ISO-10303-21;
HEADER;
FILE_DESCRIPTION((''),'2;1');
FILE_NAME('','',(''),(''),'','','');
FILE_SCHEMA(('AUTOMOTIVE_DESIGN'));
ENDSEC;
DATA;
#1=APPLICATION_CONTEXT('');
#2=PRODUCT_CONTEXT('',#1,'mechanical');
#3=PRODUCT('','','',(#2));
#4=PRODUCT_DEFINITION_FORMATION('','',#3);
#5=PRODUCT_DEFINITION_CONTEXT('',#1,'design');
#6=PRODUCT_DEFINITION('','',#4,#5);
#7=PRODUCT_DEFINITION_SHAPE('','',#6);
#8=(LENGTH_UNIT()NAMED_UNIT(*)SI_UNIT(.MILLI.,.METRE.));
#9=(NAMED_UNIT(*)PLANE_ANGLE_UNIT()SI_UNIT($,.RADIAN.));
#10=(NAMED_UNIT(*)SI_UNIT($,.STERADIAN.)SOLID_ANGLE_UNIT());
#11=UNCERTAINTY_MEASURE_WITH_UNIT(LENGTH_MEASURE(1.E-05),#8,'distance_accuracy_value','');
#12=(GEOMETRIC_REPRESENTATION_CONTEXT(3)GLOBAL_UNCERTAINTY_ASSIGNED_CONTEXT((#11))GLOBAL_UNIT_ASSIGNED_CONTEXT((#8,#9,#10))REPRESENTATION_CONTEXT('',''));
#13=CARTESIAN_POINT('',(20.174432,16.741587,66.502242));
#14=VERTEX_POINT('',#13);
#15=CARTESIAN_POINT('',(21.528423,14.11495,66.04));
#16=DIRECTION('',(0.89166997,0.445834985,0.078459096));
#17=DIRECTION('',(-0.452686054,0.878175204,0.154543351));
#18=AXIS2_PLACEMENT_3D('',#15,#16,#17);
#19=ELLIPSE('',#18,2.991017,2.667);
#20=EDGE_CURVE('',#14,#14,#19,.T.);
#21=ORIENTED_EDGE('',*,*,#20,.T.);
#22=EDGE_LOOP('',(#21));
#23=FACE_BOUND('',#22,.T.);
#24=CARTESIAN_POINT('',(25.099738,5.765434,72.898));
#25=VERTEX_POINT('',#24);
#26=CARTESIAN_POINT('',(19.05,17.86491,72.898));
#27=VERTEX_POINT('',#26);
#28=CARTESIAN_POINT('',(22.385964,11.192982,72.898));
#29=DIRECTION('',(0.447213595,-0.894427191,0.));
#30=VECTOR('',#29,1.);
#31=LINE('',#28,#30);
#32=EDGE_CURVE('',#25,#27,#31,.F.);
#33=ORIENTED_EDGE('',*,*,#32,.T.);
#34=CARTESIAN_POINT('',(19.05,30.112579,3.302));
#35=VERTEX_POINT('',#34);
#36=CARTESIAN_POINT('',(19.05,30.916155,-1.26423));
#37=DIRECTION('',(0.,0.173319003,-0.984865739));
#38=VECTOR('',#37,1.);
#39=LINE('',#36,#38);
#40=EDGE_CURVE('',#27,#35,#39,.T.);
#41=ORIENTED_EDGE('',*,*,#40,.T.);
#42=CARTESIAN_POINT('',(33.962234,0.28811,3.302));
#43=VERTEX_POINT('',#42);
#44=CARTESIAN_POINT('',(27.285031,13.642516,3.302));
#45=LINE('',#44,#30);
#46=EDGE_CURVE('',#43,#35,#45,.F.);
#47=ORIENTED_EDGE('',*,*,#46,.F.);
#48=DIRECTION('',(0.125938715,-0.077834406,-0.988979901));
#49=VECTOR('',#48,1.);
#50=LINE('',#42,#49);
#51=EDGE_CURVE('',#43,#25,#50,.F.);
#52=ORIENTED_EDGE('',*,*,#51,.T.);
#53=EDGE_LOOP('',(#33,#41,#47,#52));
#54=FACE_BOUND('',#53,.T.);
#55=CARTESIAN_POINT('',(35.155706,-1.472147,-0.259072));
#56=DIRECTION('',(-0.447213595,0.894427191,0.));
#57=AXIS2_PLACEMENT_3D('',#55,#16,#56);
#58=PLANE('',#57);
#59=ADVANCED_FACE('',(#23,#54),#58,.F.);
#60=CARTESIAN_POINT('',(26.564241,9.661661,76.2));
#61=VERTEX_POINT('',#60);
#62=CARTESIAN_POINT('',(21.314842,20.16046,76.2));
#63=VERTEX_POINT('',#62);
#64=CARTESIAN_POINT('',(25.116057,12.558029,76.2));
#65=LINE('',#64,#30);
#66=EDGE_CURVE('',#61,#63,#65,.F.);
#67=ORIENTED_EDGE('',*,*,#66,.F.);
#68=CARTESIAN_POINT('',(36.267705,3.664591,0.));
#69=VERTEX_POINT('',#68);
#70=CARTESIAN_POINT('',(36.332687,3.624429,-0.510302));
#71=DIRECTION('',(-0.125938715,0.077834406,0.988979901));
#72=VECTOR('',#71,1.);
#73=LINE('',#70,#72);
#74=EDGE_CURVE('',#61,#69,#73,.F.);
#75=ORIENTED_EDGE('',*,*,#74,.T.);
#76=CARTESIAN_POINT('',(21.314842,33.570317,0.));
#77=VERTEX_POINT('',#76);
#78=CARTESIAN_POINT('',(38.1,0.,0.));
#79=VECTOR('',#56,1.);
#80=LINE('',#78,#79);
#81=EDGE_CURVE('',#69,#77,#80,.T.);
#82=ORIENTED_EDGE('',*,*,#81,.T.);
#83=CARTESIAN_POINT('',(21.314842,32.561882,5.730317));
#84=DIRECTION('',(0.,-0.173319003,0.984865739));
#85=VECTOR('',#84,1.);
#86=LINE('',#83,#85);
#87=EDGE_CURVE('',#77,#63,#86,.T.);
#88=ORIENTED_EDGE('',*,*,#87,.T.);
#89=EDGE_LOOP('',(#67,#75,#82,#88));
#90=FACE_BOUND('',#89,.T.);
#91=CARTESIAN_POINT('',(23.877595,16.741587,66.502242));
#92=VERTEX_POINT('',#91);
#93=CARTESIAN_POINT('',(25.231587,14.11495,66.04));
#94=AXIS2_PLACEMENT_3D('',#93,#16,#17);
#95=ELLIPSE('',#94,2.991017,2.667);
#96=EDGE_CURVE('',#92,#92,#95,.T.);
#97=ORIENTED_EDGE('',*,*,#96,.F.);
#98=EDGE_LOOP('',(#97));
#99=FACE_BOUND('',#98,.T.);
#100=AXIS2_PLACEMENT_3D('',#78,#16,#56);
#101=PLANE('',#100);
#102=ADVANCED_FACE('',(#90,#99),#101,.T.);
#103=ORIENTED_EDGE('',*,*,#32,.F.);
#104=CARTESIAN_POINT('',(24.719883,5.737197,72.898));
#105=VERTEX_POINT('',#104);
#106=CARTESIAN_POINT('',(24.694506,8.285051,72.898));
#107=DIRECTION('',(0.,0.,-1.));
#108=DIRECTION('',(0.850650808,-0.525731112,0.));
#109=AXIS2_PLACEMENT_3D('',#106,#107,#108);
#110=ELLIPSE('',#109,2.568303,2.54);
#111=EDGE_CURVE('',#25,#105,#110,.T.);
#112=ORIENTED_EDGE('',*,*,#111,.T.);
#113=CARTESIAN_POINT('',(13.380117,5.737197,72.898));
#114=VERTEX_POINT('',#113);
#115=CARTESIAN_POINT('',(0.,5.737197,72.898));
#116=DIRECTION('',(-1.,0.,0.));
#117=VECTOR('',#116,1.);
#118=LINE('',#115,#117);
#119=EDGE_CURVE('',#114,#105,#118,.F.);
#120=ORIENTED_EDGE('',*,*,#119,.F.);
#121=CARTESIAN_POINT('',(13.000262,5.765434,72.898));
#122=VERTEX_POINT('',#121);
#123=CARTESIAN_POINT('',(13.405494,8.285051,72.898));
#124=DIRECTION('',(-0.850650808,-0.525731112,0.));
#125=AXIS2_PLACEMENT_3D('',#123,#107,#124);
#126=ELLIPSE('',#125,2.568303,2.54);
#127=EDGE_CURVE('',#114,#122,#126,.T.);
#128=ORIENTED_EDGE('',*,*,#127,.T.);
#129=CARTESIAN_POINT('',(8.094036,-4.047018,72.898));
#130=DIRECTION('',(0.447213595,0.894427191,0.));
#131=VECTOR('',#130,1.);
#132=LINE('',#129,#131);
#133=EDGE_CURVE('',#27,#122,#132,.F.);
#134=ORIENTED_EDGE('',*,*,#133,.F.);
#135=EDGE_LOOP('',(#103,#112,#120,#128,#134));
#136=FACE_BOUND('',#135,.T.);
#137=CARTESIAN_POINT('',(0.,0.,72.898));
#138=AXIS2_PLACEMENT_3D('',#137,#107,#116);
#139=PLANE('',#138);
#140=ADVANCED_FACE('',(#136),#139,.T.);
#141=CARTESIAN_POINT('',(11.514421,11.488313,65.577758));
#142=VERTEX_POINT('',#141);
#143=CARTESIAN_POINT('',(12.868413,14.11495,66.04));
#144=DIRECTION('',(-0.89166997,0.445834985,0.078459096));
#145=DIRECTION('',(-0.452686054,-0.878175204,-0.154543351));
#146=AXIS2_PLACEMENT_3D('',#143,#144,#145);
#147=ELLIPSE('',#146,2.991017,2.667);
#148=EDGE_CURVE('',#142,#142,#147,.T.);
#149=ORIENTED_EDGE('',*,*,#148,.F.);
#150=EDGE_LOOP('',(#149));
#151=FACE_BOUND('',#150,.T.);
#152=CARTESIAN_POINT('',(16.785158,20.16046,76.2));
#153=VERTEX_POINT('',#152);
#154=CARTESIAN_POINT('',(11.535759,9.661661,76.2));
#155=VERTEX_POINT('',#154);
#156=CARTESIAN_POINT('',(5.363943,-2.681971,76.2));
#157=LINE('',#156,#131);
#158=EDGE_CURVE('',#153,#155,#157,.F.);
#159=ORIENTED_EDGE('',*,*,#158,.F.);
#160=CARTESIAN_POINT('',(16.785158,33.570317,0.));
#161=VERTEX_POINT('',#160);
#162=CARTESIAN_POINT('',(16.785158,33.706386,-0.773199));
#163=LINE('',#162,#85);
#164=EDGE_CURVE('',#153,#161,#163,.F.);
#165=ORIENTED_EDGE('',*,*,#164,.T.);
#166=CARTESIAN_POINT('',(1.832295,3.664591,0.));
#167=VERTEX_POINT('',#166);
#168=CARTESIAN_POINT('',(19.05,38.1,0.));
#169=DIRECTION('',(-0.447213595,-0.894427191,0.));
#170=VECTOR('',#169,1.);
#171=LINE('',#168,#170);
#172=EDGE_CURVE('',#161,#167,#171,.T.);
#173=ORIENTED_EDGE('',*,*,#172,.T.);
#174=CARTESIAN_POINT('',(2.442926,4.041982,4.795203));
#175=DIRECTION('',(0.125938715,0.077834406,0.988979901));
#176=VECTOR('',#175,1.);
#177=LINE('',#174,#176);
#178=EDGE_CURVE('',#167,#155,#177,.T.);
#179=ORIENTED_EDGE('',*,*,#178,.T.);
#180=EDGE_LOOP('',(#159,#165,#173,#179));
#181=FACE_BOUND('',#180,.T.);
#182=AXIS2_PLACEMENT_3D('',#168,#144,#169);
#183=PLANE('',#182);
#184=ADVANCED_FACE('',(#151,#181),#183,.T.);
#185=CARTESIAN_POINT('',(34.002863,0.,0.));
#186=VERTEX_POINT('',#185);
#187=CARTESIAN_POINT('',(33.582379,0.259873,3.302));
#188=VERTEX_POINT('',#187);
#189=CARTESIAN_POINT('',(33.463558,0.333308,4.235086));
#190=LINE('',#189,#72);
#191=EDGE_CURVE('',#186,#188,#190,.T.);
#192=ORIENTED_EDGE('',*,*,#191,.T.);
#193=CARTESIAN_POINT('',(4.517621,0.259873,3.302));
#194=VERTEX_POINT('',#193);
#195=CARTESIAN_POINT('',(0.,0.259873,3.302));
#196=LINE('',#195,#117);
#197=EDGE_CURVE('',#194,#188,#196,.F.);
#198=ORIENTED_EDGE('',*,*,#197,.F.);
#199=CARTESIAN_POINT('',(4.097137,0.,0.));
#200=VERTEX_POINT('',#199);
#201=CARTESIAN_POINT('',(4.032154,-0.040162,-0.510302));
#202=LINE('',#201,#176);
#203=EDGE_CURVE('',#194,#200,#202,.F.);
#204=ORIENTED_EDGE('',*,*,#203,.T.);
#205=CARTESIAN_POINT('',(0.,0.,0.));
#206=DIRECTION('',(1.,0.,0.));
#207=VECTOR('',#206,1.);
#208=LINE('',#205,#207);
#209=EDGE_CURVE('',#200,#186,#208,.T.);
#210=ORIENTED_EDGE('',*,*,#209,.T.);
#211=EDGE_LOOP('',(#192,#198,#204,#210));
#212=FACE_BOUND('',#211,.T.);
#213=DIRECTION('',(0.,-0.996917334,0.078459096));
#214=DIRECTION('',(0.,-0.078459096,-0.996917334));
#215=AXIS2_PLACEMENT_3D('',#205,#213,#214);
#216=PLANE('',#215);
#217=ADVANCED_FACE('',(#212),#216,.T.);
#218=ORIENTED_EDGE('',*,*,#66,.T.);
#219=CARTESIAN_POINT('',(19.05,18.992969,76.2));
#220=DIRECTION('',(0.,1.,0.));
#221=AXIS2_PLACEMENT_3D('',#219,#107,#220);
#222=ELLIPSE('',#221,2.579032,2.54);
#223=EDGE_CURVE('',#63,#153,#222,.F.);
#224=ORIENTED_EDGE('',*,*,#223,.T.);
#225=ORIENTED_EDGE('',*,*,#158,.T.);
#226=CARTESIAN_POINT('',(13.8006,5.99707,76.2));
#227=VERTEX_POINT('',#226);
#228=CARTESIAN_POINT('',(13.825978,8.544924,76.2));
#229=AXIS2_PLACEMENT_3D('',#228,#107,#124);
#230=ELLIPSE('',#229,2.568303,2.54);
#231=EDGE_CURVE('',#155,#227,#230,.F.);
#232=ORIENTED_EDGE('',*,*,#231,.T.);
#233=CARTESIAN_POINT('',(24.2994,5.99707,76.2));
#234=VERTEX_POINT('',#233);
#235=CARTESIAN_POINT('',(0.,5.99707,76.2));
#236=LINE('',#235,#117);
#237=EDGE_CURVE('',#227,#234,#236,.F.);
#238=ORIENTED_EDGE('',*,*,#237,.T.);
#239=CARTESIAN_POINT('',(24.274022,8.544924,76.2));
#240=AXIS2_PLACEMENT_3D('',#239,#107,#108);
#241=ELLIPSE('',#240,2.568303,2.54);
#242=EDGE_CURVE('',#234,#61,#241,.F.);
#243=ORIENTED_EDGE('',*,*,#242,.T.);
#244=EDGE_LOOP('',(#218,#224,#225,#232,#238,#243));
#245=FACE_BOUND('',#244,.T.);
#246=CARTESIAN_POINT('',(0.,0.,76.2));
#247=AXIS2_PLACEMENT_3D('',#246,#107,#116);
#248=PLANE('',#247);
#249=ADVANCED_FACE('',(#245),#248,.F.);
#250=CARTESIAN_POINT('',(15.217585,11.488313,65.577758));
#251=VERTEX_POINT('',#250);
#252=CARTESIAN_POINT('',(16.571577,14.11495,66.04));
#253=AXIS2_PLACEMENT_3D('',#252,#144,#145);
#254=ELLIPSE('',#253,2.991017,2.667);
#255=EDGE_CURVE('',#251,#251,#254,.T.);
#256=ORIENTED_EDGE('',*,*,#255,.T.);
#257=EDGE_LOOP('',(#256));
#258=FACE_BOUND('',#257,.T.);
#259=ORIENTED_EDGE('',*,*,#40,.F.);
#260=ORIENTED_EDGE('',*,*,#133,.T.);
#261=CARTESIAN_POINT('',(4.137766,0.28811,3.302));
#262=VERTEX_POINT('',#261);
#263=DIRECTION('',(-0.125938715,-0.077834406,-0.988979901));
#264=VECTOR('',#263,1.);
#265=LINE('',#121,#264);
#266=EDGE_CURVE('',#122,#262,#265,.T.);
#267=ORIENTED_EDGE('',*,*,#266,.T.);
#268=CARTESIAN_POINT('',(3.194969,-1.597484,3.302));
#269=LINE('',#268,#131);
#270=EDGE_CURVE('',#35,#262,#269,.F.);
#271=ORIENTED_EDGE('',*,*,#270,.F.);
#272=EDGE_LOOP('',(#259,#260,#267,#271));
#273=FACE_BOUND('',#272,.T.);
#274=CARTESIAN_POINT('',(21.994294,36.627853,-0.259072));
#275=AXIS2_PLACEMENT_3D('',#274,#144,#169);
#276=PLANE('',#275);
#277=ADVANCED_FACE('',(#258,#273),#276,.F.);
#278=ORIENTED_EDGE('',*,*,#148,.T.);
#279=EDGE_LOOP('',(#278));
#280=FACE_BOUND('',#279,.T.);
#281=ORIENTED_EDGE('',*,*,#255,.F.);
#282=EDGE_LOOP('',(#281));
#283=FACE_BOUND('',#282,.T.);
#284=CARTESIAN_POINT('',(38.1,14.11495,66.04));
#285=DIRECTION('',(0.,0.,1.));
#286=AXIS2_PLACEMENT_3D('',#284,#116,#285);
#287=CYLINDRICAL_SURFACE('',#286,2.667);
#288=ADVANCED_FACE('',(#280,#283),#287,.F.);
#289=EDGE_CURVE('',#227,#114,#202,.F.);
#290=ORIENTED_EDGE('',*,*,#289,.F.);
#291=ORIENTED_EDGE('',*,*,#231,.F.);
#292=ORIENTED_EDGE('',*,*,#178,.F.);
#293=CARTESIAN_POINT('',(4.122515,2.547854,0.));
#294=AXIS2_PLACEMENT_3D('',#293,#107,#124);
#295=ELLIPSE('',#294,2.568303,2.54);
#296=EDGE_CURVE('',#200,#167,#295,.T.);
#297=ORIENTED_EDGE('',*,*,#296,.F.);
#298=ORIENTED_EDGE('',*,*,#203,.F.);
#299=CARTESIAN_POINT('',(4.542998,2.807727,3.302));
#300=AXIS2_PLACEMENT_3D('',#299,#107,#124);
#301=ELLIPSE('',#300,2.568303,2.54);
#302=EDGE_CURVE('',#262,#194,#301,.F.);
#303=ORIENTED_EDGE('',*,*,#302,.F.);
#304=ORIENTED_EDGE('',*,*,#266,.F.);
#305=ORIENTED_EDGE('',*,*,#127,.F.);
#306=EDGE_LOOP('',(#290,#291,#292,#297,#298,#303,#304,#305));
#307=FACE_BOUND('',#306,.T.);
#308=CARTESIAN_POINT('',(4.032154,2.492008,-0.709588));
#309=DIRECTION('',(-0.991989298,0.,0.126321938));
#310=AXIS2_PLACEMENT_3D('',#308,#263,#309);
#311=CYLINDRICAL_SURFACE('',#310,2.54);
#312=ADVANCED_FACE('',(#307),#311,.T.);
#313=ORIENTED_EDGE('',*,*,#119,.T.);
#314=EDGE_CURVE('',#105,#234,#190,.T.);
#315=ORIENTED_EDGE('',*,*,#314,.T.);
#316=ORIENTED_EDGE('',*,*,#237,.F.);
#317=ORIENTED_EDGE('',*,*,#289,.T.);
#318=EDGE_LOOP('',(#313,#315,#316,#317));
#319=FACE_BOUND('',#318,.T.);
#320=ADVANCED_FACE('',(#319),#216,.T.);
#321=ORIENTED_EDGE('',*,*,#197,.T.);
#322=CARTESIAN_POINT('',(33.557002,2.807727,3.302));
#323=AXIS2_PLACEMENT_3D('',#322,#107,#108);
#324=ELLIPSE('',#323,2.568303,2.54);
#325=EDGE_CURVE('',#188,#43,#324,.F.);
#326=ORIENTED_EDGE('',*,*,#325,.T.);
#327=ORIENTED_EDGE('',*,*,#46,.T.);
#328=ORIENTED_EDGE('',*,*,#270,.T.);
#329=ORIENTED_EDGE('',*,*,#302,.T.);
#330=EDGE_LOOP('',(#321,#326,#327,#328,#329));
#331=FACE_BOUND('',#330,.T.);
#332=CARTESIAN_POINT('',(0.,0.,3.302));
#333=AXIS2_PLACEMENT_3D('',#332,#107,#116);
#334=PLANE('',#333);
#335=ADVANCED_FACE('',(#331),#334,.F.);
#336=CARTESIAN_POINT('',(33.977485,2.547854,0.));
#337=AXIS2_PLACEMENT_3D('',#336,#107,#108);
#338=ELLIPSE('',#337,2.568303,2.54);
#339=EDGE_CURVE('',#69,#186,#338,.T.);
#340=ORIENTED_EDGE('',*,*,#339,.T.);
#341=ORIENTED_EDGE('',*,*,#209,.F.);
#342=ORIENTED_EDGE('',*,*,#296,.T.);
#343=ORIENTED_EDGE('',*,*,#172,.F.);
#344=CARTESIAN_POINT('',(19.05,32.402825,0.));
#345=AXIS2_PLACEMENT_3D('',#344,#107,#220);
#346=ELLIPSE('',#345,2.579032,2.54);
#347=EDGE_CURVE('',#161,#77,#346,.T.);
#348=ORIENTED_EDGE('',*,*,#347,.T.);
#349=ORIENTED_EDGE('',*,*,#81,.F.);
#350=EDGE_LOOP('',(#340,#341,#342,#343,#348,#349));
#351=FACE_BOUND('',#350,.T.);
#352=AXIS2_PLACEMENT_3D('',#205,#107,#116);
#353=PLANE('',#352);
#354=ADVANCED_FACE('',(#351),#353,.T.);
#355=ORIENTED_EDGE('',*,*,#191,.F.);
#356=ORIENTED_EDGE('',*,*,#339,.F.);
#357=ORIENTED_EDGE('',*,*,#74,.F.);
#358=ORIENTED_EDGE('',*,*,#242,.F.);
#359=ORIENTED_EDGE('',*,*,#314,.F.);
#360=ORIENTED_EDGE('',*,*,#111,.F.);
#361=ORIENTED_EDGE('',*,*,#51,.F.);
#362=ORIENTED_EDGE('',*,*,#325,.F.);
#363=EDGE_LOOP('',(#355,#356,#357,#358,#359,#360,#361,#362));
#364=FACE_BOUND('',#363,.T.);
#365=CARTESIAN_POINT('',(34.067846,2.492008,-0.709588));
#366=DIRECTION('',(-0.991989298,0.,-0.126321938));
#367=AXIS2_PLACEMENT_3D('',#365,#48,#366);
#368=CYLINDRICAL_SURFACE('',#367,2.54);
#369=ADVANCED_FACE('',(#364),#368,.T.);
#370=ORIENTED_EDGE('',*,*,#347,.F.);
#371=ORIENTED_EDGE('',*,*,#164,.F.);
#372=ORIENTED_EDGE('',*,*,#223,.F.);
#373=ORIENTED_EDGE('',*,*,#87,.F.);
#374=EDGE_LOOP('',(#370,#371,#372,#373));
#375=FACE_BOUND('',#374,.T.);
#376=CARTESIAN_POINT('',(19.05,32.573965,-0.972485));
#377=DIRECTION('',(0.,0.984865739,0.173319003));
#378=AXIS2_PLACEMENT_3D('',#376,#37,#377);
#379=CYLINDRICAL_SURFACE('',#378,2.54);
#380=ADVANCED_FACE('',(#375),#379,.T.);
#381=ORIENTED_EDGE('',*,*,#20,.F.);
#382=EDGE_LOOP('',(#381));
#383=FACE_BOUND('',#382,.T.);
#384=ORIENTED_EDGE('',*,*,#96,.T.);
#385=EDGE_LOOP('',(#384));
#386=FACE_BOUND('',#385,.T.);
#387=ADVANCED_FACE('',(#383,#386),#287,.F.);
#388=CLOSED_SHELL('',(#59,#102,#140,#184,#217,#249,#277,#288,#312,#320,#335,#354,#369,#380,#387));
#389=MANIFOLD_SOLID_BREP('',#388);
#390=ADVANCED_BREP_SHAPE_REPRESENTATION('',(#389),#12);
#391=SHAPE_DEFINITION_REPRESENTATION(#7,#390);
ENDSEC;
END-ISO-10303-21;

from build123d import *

# Parameters (mm, degrees)
BOSS_EXTRUDE1_DEPTH = 76.2
BOSS_EXTRUDE1_TAPER = 4.5
SHELL1_T            = -3.302
SKETCH3_R           = 2.667
CUT_EXTRUDE1_DEPTH  = 94.3255592
FILLET1_R           = 2.54


with BuildPart() as part:
    # Sketch1 → Boss-Extrude1 (new body)
    with BuildSketch(Plane.XY):
        Polygon((19.05, 38.1), (0, 0), (38.1, 0), align=None)
    extrude(amount=BOSS_EXTRUDE1_DEPTH, taper=BOSS_EXTRUDE1_TAPER)

    # Shell1
    shell1_openings = [part.faces().sort_by_distance(p)[0] for p in [
        (19.05, 2.656988988, 33.76024606),
    ]]
    offset(amount=SHELL1_T, openings=shell1_openings, kind=Kind.INTERSECTION)

    # Sketch3 → Cut-Extrude1 (cut, through all)
    with BuildSketch(Plane(origin=(0, 0, 0), x_dir=(0, 0, -1), z_dir=(1, 0, 0))):
        with Locations(Location((-66.04, 14.114950363, 0), (0, 0, 279.98084931))):
            Circle(SKETCH3_R)
    extrude(amount=CUT_EXTRUDE1_DEPTH, mode=Mode.SUBTRACT)

    # Fillet1
    # the kernel refuses this fillet: 2.54 mm, written as the material it takes off along each edge
    with BuildSketch(Plane(origin=(39.379699759, -0.790897947, -10.049311237), x_dir=(-0.9920380235210648, -0.00988103768125179, -0.12555048778384248), z_dir=(-0.12593871481168567, 0.07783440625310155, 0.9889799013705022)), Plane(origin=(-1.279699759, -0.790897947, -10.049311237), x_dir=(0.43481502259412097, 0.8917247171317577, -0.1255504877838424), z_dir=(0.1259387148116856, 0.07783440625310152, 0.9889799013705022))) as fillet1_piece_1:
        with BuildLine():
            CenterArc((FILLET1_R * 1.60020309461, -FILLET1_R), FILLET1_R, 90, 115.995770326)
            Line((FILLET1_R * 0.701376689441, -FILLET1_R * 1.43830479506), (0, 0))
            Line((0, 0), (FILLET1_R * 1.60020309461, 0))
        make_face()
    extrude(amount=97.371667857, mode=Mode.SUBTRACT)
    with BuildSketch(Plane(origin=(19.05, 40.267836366, -12.318486277), x_dir=(-0.45268605430468506, -0.8781752040708111, -0.1545433505306691), z_dir=(0, -0.1733190032733758, 0.9848657386183782))) as fillet1_piece_2:
        with BuildLine():
            CenterArc((FILLET1_R * 1.96973147724, FILLET1_R), FILLET1_R, 143.832298895, 126.167701105)
            Line((FILLET1_R * 1.16243835589, FILLET1_R * 1.59015067248), (0, 0))
            Line((0, 0), (FILLET1_R * 1.96973147724, 0))
        make_face()
    extrude(amount=102.386529419, mode=Mode.SUBTRACT)


solid = part.part
